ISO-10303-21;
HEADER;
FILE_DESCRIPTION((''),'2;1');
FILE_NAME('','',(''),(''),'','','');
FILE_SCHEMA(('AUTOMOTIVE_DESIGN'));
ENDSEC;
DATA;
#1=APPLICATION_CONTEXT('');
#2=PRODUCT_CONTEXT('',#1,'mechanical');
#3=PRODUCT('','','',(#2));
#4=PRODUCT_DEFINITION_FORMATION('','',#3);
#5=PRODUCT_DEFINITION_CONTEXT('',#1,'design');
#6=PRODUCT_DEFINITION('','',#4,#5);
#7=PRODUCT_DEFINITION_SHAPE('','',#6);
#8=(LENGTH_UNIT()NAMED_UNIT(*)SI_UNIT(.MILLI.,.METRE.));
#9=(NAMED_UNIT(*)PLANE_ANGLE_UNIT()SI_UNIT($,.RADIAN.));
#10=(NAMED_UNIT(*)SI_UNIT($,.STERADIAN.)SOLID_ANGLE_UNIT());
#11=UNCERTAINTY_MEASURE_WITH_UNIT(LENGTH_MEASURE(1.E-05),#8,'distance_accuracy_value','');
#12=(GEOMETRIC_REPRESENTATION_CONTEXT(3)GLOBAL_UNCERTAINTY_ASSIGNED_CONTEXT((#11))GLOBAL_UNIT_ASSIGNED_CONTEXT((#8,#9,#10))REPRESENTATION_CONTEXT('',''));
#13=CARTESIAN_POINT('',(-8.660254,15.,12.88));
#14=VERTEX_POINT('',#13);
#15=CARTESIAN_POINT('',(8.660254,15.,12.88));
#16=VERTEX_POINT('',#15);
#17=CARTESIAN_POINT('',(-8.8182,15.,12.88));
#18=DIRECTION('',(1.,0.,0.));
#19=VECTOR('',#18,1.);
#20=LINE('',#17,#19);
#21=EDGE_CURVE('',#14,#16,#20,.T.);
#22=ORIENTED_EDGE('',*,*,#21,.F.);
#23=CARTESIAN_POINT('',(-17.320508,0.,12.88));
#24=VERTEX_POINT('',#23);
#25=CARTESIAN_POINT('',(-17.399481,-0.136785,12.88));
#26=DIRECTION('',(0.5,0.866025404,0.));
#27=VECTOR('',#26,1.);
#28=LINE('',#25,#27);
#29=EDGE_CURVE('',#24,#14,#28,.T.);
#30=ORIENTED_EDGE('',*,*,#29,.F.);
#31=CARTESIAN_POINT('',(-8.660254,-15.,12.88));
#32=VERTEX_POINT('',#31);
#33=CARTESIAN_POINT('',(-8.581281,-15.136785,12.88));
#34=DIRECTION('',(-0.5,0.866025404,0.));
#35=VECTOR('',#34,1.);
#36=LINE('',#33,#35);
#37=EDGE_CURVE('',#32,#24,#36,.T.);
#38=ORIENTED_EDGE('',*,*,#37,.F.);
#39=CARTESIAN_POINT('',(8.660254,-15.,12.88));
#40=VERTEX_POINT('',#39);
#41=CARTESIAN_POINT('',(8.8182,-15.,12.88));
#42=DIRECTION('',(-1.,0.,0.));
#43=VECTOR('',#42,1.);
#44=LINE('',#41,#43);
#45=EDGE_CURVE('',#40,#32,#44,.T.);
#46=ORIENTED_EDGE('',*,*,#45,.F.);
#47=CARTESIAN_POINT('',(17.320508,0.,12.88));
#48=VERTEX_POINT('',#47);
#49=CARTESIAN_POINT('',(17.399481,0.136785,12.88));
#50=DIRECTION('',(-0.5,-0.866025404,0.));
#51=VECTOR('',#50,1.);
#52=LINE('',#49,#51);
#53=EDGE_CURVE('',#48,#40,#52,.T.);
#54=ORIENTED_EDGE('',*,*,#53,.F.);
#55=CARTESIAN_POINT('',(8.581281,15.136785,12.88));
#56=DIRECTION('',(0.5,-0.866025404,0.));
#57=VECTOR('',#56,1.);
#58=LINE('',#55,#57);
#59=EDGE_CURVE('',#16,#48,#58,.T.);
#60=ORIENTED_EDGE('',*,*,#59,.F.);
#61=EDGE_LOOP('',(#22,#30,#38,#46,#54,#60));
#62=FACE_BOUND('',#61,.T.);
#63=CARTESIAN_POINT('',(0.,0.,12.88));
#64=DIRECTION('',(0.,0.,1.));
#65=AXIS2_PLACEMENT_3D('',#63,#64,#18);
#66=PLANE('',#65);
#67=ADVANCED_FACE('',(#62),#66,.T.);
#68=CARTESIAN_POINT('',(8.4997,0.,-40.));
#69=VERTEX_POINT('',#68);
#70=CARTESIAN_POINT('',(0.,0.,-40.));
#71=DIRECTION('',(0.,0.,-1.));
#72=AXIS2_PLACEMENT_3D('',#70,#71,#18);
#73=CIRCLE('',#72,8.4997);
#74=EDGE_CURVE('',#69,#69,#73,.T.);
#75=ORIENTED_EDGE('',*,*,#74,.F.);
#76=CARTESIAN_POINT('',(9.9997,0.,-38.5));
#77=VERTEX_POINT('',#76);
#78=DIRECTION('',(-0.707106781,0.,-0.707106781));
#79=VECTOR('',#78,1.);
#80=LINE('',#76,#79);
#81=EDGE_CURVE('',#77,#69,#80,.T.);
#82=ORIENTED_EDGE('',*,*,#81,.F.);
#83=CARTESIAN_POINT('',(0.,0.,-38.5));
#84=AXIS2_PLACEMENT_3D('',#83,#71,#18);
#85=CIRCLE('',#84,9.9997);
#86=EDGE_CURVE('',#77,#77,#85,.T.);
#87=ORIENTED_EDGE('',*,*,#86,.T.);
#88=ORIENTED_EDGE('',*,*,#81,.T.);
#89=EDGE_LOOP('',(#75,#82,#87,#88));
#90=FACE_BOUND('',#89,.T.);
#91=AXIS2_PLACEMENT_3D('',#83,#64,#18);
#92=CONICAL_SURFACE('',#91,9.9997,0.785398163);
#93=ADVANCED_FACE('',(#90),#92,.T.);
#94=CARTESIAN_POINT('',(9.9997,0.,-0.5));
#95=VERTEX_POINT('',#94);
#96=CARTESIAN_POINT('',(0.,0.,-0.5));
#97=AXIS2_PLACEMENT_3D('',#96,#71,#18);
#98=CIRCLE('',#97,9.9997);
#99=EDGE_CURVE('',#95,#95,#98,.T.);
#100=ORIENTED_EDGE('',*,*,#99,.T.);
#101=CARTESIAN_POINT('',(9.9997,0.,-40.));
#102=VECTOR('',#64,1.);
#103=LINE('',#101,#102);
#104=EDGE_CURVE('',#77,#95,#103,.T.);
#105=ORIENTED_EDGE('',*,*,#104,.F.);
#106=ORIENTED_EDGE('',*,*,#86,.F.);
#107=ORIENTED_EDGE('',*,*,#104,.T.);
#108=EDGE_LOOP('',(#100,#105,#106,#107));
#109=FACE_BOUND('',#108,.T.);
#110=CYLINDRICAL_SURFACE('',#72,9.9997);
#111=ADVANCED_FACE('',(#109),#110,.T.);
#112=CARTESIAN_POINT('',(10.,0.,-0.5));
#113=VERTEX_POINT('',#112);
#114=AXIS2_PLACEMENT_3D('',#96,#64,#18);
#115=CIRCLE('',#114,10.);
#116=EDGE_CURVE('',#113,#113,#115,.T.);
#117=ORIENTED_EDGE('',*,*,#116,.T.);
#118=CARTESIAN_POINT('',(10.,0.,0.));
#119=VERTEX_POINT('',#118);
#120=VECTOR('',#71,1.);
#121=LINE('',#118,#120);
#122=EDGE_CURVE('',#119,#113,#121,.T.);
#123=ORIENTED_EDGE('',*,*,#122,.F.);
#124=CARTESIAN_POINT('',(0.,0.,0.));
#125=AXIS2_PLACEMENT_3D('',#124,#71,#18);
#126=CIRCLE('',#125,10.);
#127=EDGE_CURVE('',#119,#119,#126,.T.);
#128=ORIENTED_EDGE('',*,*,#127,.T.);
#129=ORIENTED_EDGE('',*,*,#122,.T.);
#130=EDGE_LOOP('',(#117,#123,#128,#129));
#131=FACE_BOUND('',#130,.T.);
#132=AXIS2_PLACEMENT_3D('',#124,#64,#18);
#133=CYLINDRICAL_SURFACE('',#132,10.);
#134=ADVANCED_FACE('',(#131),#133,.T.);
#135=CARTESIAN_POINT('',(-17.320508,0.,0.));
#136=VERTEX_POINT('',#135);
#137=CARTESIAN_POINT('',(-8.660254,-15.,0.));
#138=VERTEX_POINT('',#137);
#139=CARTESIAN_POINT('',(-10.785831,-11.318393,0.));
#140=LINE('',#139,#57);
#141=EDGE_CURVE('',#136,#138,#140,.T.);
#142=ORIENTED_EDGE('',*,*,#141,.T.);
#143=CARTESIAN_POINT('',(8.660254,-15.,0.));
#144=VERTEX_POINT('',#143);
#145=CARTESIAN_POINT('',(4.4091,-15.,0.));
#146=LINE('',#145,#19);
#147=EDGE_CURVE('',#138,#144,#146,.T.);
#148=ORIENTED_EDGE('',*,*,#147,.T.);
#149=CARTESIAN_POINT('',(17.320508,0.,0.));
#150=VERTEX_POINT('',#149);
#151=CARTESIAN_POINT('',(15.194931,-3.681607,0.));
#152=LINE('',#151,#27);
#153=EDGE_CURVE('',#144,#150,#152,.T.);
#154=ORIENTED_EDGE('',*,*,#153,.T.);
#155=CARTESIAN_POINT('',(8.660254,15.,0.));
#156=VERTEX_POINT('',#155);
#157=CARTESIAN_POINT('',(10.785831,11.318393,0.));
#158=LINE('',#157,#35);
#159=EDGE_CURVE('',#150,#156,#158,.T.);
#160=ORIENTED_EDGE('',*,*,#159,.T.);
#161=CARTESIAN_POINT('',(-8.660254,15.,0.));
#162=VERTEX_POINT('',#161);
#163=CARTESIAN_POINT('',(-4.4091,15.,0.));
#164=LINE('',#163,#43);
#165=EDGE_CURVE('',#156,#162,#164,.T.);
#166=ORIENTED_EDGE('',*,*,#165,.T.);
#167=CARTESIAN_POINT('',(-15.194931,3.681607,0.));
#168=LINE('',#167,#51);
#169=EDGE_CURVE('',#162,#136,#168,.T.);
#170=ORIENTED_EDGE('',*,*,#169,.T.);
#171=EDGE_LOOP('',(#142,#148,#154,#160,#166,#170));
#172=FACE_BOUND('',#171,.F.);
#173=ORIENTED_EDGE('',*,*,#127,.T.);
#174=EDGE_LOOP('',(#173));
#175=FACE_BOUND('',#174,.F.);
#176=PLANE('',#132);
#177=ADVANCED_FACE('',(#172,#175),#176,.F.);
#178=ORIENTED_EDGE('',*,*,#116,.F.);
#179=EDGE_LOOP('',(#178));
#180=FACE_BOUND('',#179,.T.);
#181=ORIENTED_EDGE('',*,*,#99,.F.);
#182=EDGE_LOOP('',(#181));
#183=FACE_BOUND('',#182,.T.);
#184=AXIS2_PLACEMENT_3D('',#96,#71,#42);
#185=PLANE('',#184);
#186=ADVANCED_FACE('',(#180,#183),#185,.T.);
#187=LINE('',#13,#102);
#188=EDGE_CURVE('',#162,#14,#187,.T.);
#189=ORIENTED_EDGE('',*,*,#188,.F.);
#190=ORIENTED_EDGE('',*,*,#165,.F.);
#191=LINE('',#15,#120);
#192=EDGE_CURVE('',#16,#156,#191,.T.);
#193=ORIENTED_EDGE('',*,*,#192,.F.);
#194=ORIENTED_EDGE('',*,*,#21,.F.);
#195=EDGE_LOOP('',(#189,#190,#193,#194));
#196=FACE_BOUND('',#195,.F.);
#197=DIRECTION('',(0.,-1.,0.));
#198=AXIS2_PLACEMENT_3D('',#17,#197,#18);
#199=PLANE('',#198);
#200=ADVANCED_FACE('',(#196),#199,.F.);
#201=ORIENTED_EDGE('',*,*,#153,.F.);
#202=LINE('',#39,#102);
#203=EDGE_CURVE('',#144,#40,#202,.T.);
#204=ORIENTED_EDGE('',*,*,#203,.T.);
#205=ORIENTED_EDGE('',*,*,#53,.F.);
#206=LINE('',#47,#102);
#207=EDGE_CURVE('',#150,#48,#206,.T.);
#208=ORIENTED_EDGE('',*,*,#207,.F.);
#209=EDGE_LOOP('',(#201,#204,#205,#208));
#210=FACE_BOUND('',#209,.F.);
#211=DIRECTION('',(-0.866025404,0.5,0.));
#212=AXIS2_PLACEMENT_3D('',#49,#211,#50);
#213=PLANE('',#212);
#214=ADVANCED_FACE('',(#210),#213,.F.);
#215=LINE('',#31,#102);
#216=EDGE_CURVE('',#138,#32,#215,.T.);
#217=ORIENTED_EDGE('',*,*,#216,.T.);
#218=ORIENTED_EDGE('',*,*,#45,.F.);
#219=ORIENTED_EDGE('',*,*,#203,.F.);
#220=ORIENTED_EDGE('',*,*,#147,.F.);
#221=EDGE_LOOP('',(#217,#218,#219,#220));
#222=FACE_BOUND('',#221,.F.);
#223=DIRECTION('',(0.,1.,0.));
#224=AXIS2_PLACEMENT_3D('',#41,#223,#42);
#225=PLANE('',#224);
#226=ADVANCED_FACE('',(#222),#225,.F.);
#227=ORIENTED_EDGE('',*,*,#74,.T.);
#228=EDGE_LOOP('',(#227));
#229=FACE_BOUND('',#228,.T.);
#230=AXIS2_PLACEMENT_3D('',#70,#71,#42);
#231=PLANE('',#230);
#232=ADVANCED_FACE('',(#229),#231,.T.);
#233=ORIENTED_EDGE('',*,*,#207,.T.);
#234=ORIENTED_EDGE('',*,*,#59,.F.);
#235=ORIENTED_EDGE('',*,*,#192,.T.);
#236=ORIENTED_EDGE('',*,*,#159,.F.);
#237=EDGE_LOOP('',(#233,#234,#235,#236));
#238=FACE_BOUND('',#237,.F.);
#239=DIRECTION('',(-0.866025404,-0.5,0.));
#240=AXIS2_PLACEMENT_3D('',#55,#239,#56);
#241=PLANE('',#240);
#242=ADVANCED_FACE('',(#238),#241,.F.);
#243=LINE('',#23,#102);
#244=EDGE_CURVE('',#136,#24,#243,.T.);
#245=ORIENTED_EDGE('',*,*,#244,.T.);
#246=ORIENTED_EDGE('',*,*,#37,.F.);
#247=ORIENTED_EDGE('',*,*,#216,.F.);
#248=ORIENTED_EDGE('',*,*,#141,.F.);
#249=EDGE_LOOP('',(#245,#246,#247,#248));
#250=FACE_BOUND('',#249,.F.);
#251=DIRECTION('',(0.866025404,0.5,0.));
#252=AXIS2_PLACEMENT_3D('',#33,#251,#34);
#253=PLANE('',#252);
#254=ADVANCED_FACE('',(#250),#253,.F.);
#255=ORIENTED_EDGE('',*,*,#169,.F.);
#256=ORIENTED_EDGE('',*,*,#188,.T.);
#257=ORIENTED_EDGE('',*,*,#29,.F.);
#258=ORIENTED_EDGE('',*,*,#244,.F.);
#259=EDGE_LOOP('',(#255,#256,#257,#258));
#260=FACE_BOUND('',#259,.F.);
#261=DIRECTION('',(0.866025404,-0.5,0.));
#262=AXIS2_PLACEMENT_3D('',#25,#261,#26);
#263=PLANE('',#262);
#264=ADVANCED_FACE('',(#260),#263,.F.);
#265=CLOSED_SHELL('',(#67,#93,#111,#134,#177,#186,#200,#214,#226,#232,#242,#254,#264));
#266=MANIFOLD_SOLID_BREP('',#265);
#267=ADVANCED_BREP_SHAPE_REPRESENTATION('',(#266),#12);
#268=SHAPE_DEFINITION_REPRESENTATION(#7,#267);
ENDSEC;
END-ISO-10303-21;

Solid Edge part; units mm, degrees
sketch "Sketch1" plane through (0, 0, 0) normal (0, 0, 1) x (1, 0, 0)
  circle A0 centre (0, 0) radius 17.4
  dimension "D1" = 34.8
extrude "Protrusion1" add sketch "Sketch1" along normal blind 12.88
sketch "Sketch2" plane through (0, 0, 0) normal (0, 0, -1) x (1, 0, 0)
  circle A0 centre (0, 0) radius 10
extrude "Protrusion2" add sketch "Sketch2" along normal blind 40
sketch "Sketch3" plane through (0, 0, -40) normal (0, 0, -1) x (1, 0, 0)
  circle A0 centre (0, 0) radius 9.9997
extrude "Cutout1" cut sketch "Sketch3" against normal blind 39.5 flip side to cut
chamfer "Chamfer_1" distance 1.5 angle 45 1 edges at (-9.9997, 0, -40)
sketch "Sketch4" plane through (0, 0, 12.88) normal (0, 0, 1) x (1, 0, 0)
  line L0 (-8.8182, 15) -> (8.8182, 15)
  dimension "D1" = 30
extrude "Cutout2" cut sketch "Sketch4" against normal up to next material side at (0, 15.05, 12.88)
pattern_circular "Pattern1" count 6 over 360 about axis through (0, 0, 12.88) along (0, 0, 1) of "Cutout2"
properties part number "24104721"
